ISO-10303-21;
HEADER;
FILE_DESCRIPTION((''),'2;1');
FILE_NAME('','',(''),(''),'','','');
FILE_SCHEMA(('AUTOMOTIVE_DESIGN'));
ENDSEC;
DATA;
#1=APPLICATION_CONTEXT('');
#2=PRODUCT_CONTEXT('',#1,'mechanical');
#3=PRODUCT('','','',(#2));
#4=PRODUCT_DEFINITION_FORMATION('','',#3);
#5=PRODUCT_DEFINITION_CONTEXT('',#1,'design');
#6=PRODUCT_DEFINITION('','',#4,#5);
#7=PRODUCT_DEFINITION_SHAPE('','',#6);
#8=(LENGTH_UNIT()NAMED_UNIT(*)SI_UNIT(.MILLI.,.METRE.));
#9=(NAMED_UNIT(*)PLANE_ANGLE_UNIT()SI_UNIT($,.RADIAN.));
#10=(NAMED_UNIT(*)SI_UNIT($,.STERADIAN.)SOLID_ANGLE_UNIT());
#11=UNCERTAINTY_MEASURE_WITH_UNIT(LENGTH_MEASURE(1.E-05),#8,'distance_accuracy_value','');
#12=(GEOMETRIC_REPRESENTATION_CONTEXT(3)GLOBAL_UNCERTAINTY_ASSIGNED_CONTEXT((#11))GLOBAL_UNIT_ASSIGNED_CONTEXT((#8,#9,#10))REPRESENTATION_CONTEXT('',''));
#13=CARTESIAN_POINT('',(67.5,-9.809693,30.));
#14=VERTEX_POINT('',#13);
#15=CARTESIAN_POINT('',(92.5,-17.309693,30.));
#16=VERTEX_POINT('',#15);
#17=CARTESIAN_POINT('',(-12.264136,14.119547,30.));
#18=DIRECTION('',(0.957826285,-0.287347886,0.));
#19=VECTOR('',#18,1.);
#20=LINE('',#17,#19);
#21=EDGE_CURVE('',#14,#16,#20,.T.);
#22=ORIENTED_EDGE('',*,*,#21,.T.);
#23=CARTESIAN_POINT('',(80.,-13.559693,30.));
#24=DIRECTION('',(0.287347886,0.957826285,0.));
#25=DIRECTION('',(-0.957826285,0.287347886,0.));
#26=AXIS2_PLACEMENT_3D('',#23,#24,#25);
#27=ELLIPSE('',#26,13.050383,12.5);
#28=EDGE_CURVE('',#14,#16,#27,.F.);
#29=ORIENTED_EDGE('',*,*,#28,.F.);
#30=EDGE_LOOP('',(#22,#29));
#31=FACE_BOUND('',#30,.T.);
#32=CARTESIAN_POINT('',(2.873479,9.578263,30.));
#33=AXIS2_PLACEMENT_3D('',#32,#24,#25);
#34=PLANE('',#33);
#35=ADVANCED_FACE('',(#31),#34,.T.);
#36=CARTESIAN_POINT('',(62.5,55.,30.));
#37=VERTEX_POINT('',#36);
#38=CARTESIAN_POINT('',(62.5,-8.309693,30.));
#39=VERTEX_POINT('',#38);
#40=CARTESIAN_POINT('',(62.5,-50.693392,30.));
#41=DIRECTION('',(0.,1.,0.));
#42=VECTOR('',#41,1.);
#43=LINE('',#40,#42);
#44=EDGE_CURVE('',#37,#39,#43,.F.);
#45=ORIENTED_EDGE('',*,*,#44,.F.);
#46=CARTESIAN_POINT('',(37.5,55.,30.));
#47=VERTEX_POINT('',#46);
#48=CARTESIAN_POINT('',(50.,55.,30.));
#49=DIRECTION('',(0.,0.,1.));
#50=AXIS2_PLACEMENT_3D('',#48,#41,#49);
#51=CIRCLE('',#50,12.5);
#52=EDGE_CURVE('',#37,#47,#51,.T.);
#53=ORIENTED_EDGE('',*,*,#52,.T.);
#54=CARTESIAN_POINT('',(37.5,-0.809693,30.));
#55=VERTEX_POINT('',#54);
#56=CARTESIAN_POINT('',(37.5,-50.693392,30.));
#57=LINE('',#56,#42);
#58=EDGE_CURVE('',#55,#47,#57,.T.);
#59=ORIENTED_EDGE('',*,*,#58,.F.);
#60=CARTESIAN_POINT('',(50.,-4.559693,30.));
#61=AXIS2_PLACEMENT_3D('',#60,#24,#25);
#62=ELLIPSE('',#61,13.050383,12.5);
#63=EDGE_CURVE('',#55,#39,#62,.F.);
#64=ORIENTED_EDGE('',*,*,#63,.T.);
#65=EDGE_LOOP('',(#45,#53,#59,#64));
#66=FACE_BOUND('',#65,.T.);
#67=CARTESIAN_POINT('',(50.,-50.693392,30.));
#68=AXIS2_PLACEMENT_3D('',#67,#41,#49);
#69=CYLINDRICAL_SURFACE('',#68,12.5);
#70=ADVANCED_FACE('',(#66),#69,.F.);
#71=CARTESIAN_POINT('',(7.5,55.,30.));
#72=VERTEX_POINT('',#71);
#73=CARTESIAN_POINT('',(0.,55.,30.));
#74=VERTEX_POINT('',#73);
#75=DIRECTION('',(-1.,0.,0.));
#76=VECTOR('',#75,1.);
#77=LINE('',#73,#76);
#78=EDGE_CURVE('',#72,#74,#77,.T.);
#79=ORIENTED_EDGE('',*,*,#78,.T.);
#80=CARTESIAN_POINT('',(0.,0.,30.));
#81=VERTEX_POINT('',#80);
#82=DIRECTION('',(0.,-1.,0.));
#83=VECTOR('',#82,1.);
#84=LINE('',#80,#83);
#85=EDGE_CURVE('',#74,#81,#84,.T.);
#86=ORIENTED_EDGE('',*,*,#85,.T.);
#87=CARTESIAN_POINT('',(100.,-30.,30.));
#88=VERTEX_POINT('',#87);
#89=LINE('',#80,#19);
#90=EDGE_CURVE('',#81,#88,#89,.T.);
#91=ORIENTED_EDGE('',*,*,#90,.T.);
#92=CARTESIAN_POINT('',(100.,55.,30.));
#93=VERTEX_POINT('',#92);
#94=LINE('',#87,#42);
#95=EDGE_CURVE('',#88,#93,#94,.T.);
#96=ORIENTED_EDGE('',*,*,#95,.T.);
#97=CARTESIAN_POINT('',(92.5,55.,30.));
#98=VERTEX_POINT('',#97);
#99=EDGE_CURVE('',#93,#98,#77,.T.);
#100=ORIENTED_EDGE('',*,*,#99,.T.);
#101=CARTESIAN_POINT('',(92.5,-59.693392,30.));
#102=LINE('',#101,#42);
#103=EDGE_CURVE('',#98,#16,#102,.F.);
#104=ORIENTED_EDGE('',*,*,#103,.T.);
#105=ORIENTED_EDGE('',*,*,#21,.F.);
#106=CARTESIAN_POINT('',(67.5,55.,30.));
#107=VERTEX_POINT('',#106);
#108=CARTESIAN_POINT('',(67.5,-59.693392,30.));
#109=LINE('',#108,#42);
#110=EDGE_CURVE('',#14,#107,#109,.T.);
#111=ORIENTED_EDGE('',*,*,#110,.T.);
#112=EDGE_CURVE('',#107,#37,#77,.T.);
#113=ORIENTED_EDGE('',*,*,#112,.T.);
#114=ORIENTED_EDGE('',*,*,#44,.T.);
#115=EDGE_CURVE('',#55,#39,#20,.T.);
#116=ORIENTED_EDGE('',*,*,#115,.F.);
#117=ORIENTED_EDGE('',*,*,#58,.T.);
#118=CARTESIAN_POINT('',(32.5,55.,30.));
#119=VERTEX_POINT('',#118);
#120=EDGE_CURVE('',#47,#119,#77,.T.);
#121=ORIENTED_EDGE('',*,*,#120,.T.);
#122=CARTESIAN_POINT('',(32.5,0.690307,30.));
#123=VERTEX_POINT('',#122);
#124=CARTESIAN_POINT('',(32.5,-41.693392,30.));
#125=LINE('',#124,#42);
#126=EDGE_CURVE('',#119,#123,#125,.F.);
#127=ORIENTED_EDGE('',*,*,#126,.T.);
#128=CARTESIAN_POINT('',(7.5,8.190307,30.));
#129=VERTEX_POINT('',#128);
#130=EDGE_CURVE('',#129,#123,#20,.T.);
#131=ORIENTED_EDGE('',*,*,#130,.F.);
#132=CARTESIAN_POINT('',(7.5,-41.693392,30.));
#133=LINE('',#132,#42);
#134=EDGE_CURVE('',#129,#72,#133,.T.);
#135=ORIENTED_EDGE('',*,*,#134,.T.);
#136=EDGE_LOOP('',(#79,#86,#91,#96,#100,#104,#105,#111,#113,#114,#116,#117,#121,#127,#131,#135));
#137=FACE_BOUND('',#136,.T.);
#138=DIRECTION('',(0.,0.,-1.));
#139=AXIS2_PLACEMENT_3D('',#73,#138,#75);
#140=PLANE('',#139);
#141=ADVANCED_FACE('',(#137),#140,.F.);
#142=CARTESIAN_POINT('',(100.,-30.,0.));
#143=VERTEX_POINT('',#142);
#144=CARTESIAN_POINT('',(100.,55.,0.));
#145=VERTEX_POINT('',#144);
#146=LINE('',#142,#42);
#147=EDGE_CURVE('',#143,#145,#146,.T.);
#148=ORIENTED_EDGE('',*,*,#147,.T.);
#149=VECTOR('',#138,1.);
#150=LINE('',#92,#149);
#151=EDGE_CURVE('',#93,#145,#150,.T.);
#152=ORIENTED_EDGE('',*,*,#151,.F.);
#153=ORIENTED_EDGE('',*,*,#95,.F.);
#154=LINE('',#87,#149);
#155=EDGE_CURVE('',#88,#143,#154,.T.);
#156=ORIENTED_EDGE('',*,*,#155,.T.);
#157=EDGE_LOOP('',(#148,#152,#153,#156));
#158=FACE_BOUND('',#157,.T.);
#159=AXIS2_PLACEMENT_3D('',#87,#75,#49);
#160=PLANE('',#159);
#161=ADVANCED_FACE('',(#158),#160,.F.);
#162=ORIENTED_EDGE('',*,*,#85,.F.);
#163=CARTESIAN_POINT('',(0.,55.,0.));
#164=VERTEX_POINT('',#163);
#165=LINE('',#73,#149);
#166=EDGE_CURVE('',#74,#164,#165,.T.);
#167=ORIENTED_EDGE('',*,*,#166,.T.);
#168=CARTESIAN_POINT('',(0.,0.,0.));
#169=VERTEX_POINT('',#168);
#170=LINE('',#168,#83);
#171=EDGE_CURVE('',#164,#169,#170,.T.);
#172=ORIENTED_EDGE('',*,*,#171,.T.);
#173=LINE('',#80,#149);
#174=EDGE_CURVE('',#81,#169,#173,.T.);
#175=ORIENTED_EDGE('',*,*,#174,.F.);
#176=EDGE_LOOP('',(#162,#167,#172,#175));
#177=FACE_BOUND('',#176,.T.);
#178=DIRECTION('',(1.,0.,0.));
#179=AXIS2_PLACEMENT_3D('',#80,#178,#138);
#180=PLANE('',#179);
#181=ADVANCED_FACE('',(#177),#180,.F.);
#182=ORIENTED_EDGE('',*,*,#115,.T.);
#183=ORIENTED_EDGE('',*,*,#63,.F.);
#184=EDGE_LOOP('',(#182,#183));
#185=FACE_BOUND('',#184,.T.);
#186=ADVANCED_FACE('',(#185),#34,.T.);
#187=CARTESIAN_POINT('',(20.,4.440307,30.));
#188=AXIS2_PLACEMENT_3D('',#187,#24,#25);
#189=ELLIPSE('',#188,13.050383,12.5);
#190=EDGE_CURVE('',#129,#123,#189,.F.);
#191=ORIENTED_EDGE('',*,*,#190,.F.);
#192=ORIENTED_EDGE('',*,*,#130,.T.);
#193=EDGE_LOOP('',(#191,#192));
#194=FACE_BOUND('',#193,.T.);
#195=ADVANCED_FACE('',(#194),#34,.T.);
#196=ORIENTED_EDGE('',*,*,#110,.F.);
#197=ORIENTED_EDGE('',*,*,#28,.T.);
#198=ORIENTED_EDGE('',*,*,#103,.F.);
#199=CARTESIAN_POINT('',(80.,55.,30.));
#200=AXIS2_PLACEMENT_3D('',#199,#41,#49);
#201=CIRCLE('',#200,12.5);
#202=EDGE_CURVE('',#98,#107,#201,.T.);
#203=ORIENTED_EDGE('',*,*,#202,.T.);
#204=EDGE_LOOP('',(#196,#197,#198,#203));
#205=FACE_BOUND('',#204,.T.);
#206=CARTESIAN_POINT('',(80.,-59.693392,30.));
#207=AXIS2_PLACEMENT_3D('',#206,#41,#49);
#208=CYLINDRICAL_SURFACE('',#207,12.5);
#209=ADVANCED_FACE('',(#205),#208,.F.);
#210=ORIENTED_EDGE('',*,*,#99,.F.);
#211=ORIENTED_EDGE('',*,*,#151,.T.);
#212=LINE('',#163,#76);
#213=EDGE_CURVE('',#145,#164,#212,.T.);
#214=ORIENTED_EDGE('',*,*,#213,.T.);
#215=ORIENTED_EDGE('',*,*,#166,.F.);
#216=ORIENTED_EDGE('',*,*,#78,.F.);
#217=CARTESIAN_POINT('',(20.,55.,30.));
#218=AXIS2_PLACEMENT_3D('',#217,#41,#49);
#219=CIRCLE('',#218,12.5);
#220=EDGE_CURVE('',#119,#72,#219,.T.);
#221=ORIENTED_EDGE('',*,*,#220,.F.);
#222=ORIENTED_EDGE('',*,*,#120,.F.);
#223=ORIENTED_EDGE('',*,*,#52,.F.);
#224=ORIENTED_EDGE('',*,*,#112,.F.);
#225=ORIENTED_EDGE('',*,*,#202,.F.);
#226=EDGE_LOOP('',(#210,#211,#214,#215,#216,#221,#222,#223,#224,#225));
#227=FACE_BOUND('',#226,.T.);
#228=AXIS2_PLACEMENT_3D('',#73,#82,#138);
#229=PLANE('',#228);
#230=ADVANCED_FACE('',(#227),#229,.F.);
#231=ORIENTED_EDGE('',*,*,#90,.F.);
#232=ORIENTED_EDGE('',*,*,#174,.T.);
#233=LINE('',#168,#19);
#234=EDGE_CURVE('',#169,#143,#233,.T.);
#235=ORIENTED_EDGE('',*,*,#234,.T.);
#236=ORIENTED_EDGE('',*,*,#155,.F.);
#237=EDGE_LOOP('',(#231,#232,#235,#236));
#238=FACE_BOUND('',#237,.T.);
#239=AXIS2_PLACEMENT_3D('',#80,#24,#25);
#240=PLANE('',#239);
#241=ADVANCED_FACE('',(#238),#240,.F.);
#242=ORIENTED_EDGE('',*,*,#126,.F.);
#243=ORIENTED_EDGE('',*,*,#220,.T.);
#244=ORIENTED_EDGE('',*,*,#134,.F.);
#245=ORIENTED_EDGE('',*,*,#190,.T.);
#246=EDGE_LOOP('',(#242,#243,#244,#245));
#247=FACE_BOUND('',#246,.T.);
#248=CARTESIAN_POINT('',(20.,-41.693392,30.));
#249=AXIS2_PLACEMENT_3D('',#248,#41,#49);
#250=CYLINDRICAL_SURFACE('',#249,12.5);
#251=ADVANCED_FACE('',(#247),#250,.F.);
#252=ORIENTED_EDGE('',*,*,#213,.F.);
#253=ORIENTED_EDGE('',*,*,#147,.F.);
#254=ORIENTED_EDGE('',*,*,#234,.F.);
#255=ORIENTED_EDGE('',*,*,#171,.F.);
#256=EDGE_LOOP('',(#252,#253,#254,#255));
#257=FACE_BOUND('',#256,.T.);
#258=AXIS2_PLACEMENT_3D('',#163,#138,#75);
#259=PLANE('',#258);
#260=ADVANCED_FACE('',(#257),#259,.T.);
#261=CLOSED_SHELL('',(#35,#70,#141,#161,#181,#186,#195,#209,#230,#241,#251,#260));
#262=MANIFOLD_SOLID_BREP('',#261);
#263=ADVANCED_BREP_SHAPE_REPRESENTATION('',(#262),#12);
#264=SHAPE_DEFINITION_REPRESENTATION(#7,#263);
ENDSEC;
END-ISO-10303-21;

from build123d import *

# Parameters (mm, degrees)
EXTRUDE1_DEPTH    = 30
EXTRUDE2_REACH    = 136.629
SKETCH2_R         = 12.5
LPATTERN1_START   = -0.809693491
LPATTERN1_DEPTH   = 55.809693491
LPATTERN1_START_2 = -9.809693491
LPATTERN1_2_DEPTH = 55.831993491
LPATTERN1_START_3 = -17.309693491
LPATTERN1_3_DEPTH = 7.5
LPATTERN1_START_4 = -8.309693491
LPATTERN1_4_DEPTH = 7.5
LPATTERN1_START_5 = 17
LPATTERN1_5_DEPTH = 13


with BuildPart() as part:
    # Sketch1 → Extrude1 (new body)
    with BuildSketch(Plane.XY):
        Polygon((0, 0), (100, -30), (100, 55), (0, 55), align=None)
    extrude(amount=EXTRUDE1_DEPTH)

    # Extrude2: up to this plane
    extrude2_end = Plane(origin=(2.873478856, 9.578262852, 30), z_dir=(0.2873478855663455, 0.9578262852211514, 0))
    # Sketch2 → Extrude2 (cut, up to the surface)
    with BuildSketch(Plane(origin=(0, 55, 0), x_dir=(1, 0, 0), z_dir=(0, 1, 0)), mode=Mode.PRIVATE) as extrude2_sk1:
        with Locations((20, -30)):
            Circle(SKETCH2_R)
    extrude2_tool1 = split(extrude(extrude2_sk1.sketch, amount=-EXTRUDE2_REACH, mode=Mode.PRIVATE), bisect_by=extrude2_end, keep=Keep.BOTH, mode=Mode.PRIVATE)
    add(extrude2_tool1.solids().sort_by_distance((20, 55, 30))[0], mode=Mode.SUBTRACT)

    # LPattern1: read off the stored shape, not the designer's step
    # LPattern1 outline → LPattern1 (cut)
    with BuildSketch(Plane(origin=(0, 0, 0), x_dir=(1, 0, 0), z_dir=(0, 1, 0)).offset(LPATTERN1_START)):
        with BuildLine():
            Line((37.5, -30), (62.5, -30))
            ThreePointArc((62.5, -30), (50, -17.5), (37.5, -30))
        make_face()
        with BuildLine():
            ThreePointArc((92.5, -30), (80, -17.5), (67.5, -30))
            Line((67.5, -30), (92.5, -30))
        make_face()
    extrude(amount=LPATTERN1_DEPTH, mode=Mode.SUBTRACT)

    # LPattern1 2 outline → LPattern1 2 (cut)
    with BuildSketch(Plane(origin=(0, 0, 0), x_dir=(1, 0, 0), z_dir=(0, 1, 0)).offset(LPATTERN1_START_2)):
        with BuildLine():
            ThreePointArc((92.5, -30), (80, -17.5), (67.5, -30))
            Line((67.5, -30), (92.5, -30))
        make_face()
    extrude(amount=LPATTERN1_2_DEPTH, mode=Mode.SUBTRACT)

    # LPattern1 3 outline → LPattern1 3 (cut)
    with BuildSketch(Plane(origin=(0, 0, 0), x_dir=(1, 0, 0), z_dir=(0, 1, 0)).offset(LPATTERN1_START_3)):
        with BuildLine():
            ThreePointArc((92.5, -30), (80, -17.5), (67.5, -30))
            Line((67.5, -30), (92.5, -30))
        make_face()
    extrude(amount=LPATTERN1_3_DEPTH, mode=Mode.SUBTRACT)

    # LPattern1 4 outline → LPattern1 4 (cut)
    with BuildSketch(Plane(origin=(0, 0, 0), x_dir=(1, 0, 0), z_dir=(0, 1, 0)).offset(LPATTERN1_START_4)):
        with BuildLine():
            Line((37.5, -30), (62.5, -30))
            ThreePointArc((62.5, -30), (50, -17.5), (37.5, -30))
        make_face()
    extrude(amount=LPATTERN1_4_DEPTH, mode=Mode.SUBTRACT)

    # LPattern1 5 outline → LPattern1 5 (add)
    with BuildSketch(Plane.XY.offset(LPATTERN1_START_5)):
        Polygon((92.5, 55), (92.5, -17.309693491), (67.5, -9.809693491), (67.5, 55), (62.5, 55), (62.5, -8.309693491), (37.5, -0.809693491), (37.5, 55), (32.5, 55), (32.5, 0.690306509), (7.5, 8.190306509), (7.5, 55), (0, 55), (0, 0), (100, -30), (100, 55), align=None)
    extrude(amount=LPATTERN1_5_DEPTH)


solid = part.part
